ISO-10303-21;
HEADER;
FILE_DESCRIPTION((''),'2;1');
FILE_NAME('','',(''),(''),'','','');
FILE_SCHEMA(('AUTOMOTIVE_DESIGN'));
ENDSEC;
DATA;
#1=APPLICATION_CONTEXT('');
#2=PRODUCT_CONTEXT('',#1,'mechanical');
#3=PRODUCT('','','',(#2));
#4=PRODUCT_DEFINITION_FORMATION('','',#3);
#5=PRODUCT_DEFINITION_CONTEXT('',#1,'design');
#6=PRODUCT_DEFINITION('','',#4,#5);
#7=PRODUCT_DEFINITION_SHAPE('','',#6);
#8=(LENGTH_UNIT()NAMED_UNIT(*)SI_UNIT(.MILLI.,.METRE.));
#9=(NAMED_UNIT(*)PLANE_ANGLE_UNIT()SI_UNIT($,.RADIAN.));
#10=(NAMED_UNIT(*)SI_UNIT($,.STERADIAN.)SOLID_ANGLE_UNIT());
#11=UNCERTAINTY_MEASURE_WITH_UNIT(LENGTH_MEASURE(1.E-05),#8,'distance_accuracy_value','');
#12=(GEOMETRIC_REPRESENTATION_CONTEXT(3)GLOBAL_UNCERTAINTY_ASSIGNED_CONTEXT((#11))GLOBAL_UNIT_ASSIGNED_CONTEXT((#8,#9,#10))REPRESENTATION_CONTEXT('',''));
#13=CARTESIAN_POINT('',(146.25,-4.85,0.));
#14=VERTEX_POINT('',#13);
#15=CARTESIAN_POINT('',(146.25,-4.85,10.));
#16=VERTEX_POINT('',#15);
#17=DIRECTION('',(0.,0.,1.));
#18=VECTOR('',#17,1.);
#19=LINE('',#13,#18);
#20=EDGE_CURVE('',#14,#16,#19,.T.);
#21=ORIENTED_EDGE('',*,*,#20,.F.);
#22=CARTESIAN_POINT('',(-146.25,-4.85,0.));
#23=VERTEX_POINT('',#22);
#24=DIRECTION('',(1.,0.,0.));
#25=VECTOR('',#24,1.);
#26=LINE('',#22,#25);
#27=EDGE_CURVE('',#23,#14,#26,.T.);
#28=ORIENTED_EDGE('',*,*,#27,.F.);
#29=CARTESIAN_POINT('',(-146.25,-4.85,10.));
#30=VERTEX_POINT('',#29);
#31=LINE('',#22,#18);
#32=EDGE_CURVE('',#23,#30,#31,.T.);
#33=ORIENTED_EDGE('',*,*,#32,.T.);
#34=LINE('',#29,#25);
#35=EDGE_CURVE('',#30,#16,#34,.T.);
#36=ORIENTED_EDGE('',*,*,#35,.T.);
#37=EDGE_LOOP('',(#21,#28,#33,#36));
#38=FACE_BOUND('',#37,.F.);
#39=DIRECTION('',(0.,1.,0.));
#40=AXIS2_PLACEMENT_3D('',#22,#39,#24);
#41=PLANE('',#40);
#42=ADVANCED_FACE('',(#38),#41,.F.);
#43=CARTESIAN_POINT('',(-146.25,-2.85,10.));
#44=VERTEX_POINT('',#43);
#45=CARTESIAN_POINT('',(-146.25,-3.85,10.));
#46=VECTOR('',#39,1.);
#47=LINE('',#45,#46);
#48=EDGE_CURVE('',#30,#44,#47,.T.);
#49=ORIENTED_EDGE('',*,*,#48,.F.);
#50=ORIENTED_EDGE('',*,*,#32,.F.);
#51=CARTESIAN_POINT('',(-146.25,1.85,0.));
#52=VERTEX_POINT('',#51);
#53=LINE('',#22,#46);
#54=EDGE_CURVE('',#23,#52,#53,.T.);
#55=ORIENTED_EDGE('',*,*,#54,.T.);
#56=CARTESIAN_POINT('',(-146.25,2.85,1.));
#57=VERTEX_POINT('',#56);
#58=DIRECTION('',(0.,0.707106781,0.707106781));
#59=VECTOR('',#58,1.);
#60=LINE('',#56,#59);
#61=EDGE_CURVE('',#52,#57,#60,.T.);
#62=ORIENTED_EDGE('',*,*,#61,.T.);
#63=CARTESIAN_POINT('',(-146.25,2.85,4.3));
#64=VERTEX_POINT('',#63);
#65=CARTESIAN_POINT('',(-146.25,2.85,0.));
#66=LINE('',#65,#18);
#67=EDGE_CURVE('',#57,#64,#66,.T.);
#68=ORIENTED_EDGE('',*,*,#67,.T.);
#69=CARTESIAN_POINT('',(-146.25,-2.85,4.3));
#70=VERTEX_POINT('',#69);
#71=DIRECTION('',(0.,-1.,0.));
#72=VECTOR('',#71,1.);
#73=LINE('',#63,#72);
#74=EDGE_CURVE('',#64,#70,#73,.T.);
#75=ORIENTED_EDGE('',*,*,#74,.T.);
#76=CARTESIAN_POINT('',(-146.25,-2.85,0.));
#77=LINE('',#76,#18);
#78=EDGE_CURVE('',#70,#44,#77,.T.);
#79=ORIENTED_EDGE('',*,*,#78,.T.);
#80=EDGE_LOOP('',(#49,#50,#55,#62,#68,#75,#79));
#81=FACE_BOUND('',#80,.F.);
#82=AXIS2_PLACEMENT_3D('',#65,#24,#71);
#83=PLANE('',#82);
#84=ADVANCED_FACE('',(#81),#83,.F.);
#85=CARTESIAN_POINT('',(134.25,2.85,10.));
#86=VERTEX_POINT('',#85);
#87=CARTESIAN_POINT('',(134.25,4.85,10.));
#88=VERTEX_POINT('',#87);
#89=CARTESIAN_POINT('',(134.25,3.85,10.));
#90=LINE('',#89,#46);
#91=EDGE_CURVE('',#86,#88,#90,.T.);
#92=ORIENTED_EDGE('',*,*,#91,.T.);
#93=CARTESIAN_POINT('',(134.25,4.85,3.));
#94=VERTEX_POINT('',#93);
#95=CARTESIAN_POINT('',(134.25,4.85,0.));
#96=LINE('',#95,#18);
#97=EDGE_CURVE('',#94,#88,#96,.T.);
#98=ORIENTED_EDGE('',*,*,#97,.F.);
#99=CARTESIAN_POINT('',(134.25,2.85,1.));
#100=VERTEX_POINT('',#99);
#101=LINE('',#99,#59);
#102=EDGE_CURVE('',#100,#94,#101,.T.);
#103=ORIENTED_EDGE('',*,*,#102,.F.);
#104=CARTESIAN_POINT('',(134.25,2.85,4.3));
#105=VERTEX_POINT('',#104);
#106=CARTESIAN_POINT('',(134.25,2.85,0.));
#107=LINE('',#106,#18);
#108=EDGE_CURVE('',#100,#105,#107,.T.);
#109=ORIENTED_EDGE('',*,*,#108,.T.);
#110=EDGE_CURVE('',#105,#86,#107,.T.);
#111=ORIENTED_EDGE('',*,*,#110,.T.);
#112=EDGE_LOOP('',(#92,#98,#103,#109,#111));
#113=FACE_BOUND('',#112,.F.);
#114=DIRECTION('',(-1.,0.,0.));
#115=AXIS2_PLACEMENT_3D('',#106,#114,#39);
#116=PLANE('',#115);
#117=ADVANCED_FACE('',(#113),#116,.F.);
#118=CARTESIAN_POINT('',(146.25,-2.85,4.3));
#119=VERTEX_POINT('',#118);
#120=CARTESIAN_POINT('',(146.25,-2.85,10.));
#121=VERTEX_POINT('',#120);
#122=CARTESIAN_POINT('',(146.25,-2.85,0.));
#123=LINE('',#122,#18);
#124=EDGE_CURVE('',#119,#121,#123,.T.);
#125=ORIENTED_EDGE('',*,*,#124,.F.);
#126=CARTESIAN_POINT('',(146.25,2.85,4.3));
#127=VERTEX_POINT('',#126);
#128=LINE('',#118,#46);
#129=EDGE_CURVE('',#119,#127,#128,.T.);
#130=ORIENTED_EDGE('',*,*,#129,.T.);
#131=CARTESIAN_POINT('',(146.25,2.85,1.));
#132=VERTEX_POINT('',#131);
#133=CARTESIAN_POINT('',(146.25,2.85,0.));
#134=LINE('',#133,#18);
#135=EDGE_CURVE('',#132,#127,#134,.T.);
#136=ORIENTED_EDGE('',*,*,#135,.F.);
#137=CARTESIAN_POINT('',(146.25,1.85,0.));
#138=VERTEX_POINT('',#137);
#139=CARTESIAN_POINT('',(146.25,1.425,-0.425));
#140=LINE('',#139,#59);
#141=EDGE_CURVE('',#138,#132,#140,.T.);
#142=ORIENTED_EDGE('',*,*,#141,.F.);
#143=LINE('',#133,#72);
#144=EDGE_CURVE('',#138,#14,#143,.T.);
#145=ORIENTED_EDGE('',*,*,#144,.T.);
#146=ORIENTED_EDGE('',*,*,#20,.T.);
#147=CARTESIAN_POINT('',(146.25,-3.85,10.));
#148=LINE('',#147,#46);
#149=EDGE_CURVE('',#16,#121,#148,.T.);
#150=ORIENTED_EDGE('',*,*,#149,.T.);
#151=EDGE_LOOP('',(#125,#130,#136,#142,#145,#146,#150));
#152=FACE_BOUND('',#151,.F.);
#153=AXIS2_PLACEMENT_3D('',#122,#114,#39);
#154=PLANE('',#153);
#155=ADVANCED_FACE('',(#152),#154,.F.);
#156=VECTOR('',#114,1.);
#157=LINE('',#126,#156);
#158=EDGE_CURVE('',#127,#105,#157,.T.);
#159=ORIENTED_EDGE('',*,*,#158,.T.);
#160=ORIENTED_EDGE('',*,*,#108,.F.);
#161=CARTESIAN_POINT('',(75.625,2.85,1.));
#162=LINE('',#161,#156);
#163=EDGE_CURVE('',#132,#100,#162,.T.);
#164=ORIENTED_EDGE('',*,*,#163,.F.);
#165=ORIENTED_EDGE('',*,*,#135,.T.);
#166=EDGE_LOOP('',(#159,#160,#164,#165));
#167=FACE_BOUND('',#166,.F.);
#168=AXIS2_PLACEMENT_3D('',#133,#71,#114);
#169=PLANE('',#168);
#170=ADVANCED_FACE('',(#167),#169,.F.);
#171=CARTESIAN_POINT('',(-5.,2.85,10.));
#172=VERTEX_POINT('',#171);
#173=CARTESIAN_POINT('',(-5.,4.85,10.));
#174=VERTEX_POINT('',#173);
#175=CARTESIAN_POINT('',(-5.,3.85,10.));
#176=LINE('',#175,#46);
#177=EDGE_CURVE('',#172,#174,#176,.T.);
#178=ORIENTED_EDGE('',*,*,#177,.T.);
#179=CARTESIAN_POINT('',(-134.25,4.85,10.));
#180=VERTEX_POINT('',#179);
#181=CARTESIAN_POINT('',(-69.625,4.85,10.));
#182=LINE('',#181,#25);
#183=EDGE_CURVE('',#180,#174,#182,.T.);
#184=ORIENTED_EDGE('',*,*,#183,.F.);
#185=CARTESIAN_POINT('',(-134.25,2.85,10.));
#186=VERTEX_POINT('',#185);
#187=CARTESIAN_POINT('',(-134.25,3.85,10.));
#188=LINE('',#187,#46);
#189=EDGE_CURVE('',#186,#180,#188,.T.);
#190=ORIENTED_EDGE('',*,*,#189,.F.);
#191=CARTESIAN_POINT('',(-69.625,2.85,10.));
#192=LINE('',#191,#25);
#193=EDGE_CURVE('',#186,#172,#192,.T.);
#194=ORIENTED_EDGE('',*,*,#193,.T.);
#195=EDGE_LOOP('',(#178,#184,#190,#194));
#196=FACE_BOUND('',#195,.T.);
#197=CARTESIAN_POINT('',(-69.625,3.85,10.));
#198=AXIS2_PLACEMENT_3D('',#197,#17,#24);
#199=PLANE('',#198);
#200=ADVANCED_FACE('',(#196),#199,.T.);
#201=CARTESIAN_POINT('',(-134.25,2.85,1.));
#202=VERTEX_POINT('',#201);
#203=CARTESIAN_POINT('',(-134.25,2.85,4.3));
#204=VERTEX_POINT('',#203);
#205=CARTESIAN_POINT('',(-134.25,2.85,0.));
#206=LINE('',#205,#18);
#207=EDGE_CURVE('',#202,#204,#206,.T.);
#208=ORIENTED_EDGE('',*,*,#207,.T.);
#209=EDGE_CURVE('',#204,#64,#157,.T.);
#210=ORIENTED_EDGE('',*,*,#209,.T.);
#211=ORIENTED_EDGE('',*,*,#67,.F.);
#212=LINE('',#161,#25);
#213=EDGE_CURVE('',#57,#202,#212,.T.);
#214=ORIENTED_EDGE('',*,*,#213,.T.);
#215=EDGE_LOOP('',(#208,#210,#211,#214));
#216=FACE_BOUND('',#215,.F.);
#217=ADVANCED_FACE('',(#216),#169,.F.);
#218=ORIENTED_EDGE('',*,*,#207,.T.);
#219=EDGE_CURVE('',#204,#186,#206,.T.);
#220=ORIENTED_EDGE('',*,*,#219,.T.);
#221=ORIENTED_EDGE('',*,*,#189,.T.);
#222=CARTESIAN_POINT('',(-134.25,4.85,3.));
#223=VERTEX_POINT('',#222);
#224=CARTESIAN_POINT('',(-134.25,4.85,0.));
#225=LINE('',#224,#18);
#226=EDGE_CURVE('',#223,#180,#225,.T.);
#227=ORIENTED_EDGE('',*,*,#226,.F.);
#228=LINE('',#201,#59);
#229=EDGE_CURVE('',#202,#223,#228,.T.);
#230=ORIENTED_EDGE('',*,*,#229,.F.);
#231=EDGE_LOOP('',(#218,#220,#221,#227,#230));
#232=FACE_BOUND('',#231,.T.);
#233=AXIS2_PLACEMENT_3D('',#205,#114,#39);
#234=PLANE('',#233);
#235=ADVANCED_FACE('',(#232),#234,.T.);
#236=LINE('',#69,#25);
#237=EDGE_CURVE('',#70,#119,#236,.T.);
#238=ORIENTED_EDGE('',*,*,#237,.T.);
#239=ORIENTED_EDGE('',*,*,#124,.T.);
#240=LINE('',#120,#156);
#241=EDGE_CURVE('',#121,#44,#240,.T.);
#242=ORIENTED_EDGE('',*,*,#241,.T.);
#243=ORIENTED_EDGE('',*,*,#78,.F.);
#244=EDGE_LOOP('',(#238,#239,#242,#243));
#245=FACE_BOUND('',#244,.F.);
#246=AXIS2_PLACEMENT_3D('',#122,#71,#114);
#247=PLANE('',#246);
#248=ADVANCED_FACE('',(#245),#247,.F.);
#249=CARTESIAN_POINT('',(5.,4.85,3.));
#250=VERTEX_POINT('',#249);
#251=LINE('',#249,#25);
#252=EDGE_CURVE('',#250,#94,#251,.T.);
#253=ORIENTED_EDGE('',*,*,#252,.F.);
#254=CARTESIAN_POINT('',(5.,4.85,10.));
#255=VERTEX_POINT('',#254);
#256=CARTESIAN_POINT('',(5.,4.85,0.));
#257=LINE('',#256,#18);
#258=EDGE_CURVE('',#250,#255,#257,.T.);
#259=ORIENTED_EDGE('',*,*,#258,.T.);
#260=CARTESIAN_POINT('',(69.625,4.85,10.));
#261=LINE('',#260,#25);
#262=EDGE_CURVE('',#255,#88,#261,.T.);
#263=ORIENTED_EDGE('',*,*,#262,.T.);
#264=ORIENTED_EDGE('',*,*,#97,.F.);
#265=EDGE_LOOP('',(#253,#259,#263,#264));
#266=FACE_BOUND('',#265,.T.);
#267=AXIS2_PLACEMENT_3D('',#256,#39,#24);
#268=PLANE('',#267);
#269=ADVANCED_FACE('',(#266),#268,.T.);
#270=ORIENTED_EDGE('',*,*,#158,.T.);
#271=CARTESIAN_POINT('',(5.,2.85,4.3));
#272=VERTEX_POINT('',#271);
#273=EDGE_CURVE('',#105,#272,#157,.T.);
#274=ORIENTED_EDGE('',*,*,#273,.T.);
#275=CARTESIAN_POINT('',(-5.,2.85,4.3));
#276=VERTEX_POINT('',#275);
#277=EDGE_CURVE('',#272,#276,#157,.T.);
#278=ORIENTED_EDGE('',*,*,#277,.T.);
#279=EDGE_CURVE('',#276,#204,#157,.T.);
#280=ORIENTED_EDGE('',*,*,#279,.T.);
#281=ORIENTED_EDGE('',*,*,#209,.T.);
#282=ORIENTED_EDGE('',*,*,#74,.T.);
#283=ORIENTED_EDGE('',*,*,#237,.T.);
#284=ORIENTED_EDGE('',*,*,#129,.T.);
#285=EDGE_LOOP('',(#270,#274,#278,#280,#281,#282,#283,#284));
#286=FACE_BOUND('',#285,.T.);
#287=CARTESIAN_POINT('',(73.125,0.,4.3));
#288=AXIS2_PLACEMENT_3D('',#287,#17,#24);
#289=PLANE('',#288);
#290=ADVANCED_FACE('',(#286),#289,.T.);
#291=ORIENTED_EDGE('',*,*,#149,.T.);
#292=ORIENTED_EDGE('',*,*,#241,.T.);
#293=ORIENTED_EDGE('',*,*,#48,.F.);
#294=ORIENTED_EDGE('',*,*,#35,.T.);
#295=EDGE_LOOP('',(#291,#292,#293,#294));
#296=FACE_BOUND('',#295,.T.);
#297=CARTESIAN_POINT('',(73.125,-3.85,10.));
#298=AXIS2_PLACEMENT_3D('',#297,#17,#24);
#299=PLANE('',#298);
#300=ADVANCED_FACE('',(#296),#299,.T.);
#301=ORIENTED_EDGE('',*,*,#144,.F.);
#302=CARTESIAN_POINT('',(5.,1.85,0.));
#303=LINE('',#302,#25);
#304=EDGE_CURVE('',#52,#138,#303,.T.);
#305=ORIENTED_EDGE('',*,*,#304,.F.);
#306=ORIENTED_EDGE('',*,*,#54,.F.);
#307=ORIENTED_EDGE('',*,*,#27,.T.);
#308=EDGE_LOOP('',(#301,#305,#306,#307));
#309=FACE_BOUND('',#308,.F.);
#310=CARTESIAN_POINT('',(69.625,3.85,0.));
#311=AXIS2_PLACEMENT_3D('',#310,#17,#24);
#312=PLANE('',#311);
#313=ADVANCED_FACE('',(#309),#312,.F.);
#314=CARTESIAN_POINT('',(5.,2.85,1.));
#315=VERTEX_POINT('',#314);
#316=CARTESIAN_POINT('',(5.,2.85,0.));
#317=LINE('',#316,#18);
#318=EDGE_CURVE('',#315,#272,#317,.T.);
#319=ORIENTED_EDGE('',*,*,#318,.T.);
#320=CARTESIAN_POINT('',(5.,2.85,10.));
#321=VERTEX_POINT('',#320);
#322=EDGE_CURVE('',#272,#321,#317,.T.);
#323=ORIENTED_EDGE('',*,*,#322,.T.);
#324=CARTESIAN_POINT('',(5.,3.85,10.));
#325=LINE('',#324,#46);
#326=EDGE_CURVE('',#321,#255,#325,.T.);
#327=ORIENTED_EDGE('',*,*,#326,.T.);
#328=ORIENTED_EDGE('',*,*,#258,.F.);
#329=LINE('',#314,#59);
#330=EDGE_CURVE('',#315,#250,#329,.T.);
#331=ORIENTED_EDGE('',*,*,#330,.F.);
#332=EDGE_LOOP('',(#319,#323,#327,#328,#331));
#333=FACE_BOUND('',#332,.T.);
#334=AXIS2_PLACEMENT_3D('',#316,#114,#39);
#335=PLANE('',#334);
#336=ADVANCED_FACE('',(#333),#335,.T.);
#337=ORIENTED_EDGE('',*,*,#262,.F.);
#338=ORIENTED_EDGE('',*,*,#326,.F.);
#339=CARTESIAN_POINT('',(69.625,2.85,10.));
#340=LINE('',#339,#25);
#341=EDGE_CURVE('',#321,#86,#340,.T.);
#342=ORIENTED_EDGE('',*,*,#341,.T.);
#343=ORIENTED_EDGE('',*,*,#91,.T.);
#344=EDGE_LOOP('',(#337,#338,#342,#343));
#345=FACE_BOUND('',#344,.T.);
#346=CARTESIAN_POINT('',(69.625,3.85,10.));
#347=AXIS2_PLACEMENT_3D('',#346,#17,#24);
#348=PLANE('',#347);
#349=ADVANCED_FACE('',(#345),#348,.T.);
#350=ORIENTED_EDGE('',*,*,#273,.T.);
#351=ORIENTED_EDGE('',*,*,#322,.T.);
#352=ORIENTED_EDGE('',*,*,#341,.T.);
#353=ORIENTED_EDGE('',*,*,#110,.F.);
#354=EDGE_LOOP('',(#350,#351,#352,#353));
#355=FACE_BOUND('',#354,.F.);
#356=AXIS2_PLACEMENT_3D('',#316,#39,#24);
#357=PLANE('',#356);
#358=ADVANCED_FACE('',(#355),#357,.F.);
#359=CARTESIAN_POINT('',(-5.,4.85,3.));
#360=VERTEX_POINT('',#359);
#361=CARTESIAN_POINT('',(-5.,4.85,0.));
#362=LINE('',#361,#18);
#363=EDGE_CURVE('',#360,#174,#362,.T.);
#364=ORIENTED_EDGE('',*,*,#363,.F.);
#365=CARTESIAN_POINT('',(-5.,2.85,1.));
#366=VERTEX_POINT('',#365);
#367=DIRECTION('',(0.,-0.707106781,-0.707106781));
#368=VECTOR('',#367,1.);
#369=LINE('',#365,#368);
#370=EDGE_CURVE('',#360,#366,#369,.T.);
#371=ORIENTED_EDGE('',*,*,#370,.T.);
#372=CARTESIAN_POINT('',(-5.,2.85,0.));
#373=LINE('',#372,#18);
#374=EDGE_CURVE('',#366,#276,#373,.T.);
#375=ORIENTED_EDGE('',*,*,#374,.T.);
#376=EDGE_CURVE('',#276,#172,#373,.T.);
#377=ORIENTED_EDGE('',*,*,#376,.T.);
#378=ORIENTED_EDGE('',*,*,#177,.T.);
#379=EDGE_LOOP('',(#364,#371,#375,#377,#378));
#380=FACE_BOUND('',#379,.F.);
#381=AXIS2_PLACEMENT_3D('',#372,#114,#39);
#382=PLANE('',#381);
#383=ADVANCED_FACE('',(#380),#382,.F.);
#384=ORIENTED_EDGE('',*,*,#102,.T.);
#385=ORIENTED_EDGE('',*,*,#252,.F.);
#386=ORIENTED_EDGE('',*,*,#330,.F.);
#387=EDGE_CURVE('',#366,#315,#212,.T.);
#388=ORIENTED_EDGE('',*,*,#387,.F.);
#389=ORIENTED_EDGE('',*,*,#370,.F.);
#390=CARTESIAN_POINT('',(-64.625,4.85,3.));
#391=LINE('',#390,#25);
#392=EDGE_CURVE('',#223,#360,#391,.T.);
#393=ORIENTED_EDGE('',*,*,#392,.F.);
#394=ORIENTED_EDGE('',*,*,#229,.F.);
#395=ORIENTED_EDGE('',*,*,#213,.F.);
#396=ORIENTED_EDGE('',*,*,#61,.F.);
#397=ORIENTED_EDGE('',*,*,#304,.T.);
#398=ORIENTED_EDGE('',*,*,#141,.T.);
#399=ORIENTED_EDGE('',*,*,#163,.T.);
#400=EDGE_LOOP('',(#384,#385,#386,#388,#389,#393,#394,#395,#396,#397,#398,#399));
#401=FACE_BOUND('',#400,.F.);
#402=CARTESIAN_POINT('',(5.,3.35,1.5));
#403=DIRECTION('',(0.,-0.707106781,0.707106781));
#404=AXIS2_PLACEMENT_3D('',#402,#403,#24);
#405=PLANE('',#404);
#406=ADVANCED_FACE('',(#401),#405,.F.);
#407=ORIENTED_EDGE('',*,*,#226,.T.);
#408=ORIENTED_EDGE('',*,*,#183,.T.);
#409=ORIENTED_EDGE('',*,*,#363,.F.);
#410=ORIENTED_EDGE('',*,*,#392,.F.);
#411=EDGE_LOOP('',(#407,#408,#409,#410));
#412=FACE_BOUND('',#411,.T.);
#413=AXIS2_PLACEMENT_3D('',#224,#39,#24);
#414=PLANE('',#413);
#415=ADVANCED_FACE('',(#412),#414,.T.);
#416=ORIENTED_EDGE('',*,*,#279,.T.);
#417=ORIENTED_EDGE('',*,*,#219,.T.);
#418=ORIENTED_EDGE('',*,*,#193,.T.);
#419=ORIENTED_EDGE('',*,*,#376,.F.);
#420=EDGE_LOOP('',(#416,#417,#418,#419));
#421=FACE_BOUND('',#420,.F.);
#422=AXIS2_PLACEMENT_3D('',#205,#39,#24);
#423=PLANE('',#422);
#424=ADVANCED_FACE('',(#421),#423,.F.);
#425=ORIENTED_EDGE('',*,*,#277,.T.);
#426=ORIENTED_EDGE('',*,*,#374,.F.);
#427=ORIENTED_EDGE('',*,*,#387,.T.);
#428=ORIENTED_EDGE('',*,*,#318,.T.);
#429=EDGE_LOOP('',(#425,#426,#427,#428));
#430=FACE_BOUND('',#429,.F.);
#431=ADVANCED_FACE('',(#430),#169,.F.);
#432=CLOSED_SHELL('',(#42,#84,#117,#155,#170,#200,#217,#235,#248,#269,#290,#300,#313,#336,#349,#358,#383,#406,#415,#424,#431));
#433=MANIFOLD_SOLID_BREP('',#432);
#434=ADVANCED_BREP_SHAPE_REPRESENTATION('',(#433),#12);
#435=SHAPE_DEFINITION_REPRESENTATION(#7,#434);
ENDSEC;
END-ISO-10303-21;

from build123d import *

# Parameters (mm, degrees)
F1_DEPTH = 4.3
F0_W     = 129.25
F0_H     = 2
F0_W_2   = 146.25
F2_DEPTH = 10
F3_SIZE  = 3


# Not quite as in the source:
# - a feature names something its author has since deleted; it is built from what else it names


with BuildPart() as f1:
    # F0 (on Top) → F1 (new body)
    with BuildSketch(Plane.XY):
        Polygon((0, 2.85), (0, -2.85), (146.25, -2.85), (146.25, 2.85), (139.25, 2.85), (134.25, 2.85), (5, 2.85), align=None)
        Polygon((-139.25, 2.85), (-146.25, 2.85), (-146.25, -2.85), (0, -2.85), (0, 2.85), (-5, 2.85), (-134.25, 2.85), align=None)
    extrude(amount=F1_DEPTH)

    # F0 (on Top) → F2 (join)
    with BuildSketch(Plane.XY):
        with Locations((69.625, 3.85)):
            Rectangle(F0_W, F0_H)
        with Locations((73.125, -3.85)):
            Rectangle(F0_W_2, F0_H)
        with Locations((-73.125, -3.85)):
            Rectangle(F0_W_2, F0_H)
        with Locations((-69.625, 3.85)):
            Rectangle(F0_W, F0_H)
    extrude(amount=F2_DEPTH)

    # F3
    f3_edges = [f1.edges().sort_by_distance(p)[0] for p in [
        (69.625, 4.85, 0),
    ]]
    chamfer(f3_edges, length=F3_SIZE)


solid = f1.part
